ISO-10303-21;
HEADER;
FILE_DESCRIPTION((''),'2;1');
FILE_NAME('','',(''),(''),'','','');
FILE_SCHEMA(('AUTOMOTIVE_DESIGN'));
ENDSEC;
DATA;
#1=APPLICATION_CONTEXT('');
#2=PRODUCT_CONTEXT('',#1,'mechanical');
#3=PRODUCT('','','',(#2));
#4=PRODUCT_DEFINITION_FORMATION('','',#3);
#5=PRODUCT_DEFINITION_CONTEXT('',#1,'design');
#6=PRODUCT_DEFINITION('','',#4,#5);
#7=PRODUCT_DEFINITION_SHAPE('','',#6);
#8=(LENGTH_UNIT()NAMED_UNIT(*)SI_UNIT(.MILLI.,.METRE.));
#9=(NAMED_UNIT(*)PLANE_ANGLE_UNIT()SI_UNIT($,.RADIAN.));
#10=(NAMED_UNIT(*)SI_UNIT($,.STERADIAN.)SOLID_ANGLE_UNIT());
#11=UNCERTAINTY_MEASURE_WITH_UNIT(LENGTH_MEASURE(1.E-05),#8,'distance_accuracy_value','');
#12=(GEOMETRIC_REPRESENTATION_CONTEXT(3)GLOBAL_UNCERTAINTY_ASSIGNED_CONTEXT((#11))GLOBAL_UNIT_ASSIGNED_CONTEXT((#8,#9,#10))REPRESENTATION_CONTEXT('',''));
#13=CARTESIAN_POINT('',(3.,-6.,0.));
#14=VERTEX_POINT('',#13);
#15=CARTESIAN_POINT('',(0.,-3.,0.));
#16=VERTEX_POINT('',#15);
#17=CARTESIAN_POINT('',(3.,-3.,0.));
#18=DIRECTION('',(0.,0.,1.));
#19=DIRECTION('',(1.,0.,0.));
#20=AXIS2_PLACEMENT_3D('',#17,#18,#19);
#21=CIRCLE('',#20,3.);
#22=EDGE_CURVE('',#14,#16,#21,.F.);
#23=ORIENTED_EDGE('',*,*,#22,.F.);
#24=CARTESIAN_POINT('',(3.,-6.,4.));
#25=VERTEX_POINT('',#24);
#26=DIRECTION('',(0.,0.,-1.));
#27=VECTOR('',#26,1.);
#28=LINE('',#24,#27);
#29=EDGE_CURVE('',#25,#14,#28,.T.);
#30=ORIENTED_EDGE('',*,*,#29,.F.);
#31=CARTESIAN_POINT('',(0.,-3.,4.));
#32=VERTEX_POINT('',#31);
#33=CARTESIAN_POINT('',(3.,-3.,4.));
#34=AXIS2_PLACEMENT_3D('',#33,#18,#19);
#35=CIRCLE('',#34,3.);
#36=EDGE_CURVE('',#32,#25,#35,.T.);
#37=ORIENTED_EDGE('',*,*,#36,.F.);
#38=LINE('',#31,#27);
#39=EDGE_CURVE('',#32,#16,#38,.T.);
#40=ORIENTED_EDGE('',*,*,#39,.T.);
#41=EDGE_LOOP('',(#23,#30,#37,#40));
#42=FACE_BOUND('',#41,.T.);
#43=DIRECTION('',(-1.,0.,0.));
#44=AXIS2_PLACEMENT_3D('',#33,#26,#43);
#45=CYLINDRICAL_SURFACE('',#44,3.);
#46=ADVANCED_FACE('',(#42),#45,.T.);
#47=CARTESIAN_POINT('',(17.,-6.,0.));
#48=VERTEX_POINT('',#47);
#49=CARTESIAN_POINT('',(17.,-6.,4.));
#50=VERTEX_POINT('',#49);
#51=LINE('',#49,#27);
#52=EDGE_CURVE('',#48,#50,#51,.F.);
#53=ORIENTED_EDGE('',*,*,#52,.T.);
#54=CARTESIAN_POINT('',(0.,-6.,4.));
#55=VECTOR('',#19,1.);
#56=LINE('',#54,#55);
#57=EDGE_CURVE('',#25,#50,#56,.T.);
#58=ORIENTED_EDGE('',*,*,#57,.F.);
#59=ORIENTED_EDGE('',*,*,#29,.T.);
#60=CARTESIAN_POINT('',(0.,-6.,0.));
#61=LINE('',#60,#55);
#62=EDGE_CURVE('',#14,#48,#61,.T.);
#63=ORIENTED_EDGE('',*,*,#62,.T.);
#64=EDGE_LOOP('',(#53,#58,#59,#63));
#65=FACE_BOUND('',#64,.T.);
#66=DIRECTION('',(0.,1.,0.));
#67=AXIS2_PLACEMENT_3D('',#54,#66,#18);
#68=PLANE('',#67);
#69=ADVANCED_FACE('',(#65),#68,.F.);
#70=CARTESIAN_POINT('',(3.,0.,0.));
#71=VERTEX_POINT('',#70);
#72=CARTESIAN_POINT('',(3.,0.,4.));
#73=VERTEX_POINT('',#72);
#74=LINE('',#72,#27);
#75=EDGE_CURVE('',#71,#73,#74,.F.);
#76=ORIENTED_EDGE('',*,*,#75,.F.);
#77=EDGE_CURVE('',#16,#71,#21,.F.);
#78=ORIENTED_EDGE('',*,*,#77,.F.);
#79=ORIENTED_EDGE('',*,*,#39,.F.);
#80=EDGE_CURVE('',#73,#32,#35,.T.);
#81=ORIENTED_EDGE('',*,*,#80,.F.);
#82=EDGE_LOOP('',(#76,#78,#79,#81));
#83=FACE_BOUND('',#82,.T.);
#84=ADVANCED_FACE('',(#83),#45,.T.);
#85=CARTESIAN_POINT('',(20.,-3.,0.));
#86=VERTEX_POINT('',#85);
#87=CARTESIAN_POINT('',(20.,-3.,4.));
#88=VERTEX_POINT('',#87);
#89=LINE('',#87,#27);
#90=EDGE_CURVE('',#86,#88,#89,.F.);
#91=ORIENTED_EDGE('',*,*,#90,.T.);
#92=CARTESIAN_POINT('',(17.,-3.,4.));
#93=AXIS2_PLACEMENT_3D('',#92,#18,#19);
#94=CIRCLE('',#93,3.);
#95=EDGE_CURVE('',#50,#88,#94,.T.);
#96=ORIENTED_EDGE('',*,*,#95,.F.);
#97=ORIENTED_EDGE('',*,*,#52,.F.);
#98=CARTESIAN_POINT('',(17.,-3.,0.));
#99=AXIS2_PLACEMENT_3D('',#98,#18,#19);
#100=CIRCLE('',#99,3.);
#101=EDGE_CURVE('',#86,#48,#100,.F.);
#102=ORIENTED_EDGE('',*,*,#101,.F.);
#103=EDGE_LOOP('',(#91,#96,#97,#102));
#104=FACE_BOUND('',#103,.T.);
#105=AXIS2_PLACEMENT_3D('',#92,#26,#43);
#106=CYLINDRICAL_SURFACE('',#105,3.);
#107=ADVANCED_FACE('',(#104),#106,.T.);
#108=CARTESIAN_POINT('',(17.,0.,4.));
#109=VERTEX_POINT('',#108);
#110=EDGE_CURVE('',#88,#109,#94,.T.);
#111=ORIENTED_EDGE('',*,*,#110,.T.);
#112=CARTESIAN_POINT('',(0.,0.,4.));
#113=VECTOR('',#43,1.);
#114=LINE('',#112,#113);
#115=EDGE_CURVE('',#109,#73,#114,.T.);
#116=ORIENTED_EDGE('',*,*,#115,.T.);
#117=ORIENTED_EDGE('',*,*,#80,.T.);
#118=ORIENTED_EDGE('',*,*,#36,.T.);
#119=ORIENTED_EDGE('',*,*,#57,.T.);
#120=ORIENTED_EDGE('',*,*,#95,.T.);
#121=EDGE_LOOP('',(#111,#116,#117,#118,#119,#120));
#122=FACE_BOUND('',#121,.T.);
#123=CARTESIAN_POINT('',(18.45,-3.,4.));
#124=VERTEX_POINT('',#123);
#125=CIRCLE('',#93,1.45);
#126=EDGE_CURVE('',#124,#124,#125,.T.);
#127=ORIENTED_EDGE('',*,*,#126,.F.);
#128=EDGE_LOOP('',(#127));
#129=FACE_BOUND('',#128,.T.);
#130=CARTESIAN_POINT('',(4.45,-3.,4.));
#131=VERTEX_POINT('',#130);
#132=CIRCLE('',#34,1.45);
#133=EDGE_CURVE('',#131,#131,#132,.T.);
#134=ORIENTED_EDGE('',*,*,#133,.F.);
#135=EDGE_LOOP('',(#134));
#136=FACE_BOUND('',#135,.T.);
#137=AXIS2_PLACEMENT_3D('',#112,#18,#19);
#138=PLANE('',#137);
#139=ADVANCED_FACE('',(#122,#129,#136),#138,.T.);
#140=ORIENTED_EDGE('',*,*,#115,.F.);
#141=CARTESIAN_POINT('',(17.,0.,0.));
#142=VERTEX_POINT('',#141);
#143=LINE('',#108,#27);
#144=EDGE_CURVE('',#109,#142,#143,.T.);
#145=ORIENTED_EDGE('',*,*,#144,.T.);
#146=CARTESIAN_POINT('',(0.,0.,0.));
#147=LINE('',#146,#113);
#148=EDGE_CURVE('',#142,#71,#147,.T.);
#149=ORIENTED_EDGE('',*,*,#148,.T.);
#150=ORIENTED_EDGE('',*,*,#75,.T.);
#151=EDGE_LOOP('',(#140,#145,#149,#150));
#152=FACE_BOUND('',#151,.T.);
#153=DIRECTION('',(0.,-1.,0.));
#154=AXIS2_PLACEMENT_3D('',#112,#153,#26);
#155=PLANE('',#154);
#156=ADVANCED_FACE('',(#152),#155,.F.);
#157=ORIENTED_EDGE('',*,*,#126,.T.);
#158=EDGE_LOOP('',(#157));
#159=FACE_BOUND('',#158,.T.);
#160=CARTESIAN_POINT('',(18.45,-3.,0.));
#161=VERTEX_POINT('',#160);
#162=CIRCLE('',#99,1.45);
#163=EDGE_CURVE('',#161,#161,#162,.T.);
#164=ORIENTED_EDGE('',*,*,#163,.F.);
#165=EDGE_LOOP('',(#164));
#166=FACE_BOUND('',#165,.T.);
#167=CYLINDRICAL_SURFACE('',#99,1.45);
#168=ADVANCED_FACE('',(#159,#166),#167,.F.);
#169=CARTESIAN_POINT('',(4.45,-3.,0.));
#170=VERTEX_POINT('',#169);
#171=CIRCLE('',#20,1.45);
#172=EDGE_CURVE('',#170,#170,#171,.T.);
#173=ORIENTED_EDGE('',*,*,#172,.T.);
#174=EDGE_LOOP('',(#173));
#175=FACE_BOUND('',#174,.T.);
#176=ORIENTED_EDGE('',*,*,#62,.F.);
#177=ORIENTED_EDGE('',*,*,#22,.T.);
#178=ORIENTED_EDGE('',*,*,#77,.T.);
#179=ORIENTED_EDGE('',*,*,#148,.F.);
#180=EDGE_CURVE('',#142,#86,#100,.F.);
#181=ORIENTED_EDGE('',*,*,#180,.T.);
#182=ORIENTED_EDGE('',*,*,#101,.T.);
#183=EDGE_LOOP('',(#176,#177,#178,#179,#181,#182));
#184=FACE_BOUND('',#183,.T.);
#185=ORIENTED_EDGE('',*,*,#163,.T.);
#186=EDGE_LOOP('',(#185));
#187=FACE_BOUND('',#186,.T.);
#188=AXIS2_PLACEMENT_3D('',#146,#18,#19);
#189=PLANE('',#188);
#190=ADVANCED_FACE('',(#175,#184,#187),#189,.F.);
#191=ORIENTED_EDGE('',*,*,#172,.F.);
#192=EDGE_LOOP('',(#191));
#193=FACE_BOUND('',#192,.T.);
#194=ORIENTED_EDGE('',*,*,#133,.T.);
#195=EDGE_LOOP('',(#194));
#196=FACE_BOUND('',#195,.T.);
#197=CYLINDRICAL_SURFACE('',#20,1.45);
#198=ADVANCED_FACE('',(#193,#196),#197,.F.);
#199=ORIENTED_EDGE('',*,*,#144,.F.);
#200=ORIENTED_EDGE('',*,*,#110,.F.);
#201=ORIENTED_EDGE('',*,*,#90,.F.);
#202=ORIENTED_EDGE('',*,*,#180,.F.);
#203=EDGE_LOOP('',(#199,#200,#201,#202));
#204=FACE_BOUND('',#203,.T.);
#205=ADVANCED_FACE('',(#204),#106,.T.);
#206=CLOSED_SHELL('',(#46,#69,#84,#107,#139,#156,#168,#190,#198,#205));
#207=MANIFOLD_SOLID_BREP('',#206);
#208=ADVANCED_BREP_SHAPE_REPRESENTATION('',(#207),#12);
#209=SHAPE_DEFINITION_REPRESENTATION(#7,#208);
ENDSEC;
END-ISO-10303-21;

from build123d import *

# Parameters (mm, degrees)
SKETCH1_W               = 20
SKETCH1_H               = 6
BOSS_EXTRUDE1_DEPTH     = 4
CUT_EXTRUDE1_DEPTH      = 22.260291625
CUT_EXTRUDE1_DEPTH_BACK = 22.260291625
SKETCH2_R               = 1.45
FILLET1_R               = 3


with BuildPart() as part:
    # Sketch1 → Boss-Extrude1 (new body)
    with BuildSketch(Plane.XY):
        with Locations((10, -3)):
            Rectangle(SKETCH1_W, SKETCH1_H)
    extrude(amount=BOSS_EXTRUDE1_DEPTH)

    # Sketch2 → Cut-Extrude1 (cut, two sides: drawn at the far end of the back side and taken through both)
    with BuildSketch(Plane.XY.offset(4).offset(-CUT_EXTRUDE1_DEPTH_BACK)):
        with Locations((3, -3)):
            Circle(SKETCH2_R)
        with Locations((17, -3)):
            Circle(SKETCH2_R)
    extrude(amount=CUT_EXTRUDE1_DEPTH + CUT_EXTRUDE1_DEPTH_BACK, mode=Mode.SUBTRACT)

    # Fillet1
    fillet1_edges = [part.edges().sort_by_distance(p)[0] for p in [
        (20, -6, 2),
        (20, 0, 2),
        (0, -6, 2),
        (0, 0, 2),
    ]]
    fillet(fillet1_edges, radius=FILLET1_R - 0.0001)  # a hair under: the kernel refuses the full size


solid = part.part
